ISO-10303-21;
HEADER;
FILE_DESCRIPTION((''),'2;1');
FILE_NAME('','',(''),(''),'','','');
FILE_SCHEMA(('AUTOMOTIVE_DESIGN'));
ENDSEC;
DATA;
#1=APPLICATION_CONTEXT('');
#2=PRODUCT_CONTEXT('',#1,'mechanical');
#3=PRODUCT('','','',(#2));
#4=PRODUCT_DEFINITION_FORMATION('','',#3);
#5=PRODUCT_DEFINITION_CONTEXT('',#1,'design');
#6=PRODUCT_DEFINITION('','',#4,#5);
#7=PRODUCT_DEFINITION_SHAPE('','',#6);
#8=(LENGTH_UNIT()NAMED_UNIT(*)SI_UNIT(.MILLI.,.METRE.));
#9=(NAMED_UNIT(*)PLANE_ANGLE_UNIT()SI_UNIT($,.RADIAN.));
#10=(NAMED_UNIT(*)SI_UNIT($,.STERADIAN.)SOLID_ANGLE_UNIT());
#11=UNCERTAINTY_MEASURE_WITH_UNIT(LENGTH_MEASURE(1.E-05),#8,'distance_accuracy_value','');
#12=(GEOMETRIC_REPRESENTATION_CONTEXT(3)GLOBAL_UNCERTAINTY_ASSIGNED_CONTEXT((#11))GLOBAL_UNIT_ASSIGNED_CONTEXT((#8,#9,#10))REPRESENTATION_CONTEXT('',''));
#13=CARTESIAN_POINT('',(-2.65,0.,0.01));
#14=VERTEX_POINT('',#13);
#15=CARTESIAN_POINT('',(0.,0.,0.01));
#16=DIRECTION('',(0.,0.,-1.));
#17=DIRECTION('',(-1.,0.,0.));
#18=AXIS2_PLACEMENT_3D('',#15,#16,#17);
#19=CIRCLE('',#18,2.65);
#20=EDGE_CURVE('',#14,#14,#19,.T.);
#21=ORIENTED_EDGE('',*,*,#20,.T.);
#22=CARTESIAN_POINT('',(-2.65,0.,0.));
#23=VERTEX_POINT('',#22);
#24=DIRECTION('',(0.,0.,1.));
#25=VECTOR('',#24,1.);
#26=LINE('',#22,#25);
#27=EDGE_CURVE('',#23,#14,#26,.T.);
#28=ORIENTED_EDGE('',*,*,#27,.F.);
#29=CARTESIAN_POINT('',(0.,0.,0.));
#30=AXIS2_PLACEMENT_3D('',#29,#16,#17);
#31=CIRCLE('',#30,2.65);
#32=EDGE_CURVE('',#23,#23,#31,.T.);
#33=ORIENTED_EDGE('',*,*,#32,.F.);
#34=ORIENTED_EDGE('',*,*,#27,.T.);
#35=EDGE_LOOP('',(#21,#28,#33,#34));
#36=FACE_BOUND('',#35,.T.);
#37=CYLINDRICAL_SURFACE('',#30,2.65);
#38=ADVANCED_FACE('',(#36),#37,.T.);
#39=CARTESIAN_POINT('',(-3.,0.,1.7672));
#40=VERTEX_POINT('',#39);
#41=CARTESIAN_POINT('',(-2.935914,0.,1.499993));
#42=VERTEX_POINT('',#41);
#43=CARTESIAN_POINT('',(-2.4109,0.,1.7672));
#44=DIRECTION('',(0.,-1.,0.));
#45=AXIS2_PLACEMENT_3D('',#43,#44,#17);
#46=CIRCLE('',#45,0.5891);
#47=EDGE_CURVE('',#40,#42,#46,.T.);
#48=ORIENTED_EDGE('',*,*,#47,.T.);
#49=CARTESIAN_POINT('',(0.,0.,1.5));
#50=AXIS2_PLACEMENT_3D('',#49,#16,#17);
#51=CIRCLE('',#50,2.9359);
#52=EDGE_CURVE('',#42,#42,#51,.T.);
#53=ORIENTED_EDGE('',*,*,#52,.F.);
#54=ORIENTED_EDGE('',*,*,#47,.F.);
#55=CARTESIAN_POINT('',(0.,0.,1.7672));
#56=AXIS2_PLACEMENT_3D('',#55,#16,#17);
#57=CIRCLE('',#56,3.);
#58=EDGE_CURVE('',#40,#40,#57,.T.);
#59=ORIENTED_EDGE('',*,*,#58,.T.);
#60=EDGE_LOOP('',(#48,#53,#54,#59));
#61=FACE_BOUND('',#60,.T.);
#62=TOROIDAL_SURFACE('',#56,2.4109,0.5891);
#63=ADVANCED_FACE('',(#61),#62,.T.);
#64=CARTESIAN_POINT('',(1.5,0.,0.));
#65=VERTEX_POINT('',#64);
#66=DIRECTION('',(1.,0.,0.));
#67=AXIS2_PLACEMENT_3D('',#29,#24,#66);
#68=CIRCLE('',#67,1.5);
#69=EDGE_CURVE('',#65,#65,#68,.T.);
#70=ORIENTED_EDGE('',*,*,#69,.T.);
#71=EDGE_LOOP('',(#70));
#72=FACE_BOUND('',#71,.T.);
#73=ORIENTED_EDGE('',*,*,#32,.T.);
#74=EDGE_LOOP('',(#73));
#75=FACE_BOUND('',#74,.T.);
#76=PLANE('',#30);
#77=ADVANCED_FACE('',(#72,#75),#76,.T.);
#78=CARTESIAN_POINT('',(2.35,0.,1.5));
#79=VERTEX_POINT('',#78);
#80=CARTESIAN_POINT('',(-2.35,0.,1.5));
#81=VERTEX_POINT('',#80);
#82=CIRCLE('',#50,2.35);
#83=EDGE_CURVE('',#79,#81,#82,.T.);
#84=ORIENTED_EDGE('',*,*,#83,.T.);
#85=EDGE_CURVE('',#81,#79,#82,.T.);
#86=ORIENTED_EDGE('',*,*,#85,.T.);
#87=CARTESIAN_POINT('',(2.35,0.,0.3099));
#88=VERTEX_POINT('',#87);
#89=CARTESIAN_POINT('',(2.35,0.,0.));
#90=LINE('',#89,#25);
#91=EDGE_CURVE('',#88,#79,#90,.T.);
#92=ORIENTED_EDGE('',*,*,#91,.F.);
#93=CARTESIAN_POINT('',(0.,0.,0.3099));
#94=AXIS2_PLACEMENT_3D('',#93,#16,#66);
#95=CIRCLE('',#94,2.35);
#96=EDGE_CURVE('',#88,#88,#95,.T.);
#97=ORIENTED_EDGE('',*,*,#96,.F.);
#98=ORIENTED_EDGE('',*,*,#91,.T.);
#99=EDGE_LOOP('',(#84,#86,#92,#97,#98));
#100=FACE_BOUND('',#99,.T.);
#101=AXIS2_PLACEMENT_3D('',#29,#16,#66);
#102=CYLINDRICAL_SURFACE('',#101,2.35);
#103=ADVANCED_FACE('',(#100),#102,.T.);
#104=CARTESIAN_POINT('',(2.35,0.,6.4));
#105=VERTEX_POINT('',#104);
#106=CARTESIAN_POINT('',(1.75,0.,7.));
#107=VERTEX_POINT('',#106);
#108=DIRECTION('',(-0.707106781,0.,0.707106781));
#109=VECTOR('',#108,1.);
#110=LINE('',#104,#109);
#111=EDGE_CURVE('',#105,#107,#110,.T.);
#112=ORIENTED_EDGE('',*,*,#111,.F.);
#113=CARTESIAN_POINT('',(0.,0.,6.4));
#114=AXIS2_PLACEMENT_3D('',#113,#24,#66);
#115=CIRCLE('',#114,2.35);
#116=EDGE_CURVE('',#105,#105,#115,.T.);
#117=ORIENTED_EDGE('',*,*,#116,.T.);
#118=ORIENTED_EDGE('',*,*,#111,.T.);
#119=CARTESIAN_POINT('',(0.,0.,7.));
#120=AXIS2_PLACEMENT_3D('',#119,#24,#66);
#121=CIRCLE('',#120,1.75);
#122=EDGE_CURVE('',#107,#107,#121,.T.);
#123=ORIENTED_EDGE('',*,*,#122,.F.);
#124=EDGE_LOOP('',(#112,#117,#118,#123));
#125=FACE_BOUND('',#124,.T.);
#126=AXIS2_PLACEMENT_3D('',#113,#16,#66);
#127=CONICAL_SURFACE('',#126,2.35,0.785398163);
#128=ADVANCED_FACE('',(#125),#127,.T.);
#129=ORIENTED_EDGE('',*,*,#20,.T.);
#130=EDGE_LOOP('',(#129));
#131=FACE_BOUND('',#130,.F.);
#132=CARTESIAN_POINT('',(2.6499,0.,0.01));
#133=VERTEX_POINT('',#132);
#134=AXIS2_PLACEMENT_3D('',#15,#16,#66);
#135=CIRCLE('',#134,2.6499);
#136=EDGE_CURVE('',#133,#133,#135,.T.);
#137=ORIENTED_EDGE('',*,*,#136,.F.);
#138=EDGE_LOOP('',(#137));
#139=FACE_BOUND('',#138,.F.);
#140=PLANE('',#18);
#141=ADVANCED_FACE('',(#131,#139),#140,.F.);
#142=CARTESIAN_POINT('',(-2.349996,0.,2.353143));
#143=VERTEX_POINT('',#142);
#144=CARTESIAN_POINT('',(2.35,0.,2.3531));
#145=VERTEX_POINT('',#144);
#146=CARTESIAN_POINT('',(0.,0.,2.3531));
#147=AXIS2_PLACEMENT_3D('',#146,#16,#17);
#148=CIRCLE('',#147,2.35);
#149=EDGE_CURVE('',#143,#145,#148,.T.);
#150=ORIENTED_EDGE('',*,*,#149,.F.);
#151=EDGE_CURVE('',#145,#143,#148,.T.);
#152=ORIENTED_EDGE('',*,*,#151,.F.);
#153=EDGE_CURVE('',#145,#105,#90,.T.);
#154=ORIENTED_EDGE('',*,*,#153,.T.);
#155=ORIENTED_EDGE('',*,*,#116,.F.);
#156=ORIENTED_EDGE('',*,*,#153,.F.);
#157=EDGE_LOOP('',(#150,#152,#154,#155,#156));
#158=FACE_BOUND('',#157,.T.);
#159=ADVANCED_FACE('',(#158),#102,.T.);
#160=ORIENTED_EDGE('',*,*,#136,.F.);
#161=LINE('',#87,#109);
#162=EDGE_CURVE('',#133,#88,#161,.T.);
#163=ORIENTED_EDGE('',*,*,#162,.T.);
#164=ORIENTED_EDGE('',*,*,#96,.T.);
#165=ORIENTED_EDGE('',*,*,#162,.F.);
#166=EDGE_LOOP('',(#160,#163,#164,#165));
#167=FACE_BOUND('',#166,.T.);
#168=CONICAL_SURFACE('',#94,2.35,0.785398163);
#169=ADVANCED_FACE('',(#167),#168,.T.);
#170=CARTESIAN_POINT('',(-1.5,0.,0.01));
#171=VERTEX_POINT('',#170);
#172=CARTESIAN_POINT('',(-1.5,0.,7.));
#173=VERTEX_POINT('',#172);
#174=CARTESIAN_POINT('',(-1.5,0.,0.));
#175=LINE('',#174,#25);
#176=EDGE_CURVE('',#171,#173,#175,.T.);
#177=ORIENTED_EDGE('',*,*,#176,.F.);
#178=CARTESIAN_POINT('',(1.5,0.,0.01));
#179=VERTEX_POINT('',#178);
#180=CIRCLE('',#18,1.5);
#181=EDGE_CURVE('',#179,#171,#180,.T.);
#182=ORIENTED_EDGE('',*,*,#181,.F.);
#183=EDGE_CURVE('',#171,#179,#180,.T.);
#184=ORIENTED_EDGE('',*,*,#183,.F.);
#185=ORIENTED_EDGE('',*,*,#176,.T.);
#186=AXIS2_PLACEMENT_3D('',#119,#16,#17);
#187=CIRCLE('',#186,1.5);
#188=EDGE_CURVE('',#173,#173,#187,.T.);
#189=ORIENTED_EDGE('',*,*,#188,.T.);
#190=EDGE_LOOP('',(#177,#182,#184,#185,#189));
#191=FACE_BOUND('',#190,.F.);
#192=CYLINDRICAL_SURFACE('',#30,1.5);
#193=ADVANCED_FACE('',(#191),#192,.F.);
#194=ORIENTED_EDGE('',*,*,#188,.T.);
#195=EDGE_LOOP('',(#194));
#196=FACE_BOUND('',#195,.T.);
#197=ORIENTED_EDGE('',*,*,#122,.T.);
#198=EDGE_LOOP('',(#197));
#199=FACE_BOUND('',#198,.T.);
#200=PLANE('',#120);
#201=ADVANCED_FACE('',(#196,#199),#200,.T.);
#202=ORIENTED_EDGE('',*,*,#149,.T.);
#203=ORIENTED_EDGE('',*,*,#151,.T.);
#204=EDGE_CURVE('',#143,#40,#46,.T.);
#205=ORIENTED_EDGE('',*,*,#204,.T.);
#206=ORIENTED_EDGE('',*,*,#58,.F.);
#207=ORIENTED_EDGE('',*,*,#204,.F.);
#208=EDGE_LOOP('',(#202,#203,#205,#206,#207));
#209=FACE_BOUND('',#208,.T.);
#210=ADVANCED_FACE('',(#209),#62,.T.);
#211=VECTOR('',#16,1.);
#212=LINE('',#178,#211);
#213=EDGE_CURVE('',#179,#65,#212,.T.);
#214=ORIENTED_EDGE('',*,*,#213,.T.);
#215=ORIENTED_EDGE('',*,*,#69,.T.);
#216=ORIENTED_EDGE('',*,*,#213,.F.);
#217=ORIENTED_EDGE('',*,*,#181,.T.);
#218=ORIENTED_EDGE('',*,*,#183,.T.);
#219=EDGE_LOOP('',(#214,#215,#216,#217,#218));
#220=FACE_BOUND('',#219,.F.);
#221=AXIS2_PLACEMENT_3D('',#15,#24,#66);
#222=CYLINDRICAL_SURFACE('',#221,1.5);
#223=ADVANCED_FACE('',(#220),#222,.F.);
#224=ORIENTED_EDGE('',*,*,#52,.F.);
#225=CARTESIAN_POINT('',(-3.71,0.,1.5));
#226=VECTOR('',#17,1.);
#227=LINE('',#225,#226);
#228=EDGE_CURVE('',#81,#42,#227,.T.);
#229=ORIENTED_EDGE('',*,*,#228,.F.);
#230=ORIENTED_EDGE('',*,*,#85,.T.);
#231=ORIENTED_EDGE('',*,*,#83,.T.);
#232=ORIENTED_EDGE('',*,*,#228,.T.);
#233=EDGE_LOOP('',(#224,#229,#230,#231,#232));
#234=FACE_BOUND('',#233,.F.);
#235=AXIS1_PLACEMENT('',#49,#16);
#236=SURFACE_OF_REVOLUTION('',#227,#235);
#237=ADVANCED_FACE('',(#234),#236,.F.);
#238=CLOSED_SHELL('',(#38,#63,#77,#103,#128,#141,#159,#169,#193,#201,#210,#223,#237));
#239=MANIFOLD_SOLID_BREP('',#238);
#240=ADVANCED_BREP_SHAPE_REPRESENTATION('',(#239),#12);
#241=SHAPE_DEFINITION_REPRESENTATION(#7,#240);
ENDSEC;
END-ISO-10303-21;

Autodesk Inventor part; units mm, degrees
ref_plane "YZ Plane" through (0, 0, 0) normal (1, 0, 0) x (0, 1, 0)
ref_plane "XZ Plane" through (0, 0, 0) normal (0, 1, 0) x (-1, 0, 0)
sketch "Sketch1" plane through (0, 0, 0) normal (0, 0, 1) x (1, 0, 0)
  circle A0 centre (0, 0) radius 2.35
  dimension "d0" = 4.7
extrude "Extrusion1" add sketch "Sketch1" along normal blind 7
chamfer "Chamfer1" distance 0.6 angle 45 1 edges at (-2.35, 0, 7)
sketch "Sketch2" plane through (0, 0, 0) normal (0, 0, -1) x (-1, 0, 0)
  circle A0 centre (0, 0) radius 1.5
  dimension "d6" = 3
extrude "Extrusion2" cut sketch "Sketch2" against normal through all
sketch "Sketch3" plane through (0, 0, 0) normal (0, 0, -1) x (-1, 0, 0)
  circle A0 centre (0, 0) radius 2.65
  dimension "d11" = 5.3
extrude "Extrusion3" add sketch "Sketch3" against normal blind 0.01
chamfer "Chamfer2" distance 0.3 angle 45 1 edges at (-2.35, 0, 0.01)
sketch "Sketch4" plane through (0, 0, 0.01) normal (0, 0, 1) x (1, 0, 0)
  circle A0 centre (0, 0) radius 1.5 projected
extrude "Extrusion4" cut sketch "Sketch4" against normal through all
ref_plane "Work Plane1" through (0, 0, 1.5) normal (0, 0, -1) x (-1, 0, 0)
sketch "Sketch5" plane through (0, 0, 1.5) normal (0, 0, -1) x (-1, 0, 0)
  circle A0 centre (0, 0) radius 2.35 projected
  circle A1 centre (0, 0) radius 2.35 projected
sketch "Sketch6" plane through (0, 0, 0) normal (1, 0, 0) x (0, 1, 0)
  line L0 (2.35, 0.31) -> (2.35, 6.4) projected
  line L1 (3.71, 1.5) -> (-3.71, 1.5) projected
  circle A0 centre (2.4109, 1.7672) radius 0.5891
  line L2 (2.9359, 1.5) -> (2.35, 1.5)
  line L3 (2.35, 1.5) -> (2.35, 2.3531)
  line L4 (0, -1.4) -> (0, 8.4) projected
  point P0 (0, 0)
  dimension "d18" = 3
sweep "Sweep1" add profiles "Sketch6" path "Sketch5" picked at (2.489, 2.0554) path curves A0 contours L0 A0 L1
properties part number "pop_PSZROX-0315"
